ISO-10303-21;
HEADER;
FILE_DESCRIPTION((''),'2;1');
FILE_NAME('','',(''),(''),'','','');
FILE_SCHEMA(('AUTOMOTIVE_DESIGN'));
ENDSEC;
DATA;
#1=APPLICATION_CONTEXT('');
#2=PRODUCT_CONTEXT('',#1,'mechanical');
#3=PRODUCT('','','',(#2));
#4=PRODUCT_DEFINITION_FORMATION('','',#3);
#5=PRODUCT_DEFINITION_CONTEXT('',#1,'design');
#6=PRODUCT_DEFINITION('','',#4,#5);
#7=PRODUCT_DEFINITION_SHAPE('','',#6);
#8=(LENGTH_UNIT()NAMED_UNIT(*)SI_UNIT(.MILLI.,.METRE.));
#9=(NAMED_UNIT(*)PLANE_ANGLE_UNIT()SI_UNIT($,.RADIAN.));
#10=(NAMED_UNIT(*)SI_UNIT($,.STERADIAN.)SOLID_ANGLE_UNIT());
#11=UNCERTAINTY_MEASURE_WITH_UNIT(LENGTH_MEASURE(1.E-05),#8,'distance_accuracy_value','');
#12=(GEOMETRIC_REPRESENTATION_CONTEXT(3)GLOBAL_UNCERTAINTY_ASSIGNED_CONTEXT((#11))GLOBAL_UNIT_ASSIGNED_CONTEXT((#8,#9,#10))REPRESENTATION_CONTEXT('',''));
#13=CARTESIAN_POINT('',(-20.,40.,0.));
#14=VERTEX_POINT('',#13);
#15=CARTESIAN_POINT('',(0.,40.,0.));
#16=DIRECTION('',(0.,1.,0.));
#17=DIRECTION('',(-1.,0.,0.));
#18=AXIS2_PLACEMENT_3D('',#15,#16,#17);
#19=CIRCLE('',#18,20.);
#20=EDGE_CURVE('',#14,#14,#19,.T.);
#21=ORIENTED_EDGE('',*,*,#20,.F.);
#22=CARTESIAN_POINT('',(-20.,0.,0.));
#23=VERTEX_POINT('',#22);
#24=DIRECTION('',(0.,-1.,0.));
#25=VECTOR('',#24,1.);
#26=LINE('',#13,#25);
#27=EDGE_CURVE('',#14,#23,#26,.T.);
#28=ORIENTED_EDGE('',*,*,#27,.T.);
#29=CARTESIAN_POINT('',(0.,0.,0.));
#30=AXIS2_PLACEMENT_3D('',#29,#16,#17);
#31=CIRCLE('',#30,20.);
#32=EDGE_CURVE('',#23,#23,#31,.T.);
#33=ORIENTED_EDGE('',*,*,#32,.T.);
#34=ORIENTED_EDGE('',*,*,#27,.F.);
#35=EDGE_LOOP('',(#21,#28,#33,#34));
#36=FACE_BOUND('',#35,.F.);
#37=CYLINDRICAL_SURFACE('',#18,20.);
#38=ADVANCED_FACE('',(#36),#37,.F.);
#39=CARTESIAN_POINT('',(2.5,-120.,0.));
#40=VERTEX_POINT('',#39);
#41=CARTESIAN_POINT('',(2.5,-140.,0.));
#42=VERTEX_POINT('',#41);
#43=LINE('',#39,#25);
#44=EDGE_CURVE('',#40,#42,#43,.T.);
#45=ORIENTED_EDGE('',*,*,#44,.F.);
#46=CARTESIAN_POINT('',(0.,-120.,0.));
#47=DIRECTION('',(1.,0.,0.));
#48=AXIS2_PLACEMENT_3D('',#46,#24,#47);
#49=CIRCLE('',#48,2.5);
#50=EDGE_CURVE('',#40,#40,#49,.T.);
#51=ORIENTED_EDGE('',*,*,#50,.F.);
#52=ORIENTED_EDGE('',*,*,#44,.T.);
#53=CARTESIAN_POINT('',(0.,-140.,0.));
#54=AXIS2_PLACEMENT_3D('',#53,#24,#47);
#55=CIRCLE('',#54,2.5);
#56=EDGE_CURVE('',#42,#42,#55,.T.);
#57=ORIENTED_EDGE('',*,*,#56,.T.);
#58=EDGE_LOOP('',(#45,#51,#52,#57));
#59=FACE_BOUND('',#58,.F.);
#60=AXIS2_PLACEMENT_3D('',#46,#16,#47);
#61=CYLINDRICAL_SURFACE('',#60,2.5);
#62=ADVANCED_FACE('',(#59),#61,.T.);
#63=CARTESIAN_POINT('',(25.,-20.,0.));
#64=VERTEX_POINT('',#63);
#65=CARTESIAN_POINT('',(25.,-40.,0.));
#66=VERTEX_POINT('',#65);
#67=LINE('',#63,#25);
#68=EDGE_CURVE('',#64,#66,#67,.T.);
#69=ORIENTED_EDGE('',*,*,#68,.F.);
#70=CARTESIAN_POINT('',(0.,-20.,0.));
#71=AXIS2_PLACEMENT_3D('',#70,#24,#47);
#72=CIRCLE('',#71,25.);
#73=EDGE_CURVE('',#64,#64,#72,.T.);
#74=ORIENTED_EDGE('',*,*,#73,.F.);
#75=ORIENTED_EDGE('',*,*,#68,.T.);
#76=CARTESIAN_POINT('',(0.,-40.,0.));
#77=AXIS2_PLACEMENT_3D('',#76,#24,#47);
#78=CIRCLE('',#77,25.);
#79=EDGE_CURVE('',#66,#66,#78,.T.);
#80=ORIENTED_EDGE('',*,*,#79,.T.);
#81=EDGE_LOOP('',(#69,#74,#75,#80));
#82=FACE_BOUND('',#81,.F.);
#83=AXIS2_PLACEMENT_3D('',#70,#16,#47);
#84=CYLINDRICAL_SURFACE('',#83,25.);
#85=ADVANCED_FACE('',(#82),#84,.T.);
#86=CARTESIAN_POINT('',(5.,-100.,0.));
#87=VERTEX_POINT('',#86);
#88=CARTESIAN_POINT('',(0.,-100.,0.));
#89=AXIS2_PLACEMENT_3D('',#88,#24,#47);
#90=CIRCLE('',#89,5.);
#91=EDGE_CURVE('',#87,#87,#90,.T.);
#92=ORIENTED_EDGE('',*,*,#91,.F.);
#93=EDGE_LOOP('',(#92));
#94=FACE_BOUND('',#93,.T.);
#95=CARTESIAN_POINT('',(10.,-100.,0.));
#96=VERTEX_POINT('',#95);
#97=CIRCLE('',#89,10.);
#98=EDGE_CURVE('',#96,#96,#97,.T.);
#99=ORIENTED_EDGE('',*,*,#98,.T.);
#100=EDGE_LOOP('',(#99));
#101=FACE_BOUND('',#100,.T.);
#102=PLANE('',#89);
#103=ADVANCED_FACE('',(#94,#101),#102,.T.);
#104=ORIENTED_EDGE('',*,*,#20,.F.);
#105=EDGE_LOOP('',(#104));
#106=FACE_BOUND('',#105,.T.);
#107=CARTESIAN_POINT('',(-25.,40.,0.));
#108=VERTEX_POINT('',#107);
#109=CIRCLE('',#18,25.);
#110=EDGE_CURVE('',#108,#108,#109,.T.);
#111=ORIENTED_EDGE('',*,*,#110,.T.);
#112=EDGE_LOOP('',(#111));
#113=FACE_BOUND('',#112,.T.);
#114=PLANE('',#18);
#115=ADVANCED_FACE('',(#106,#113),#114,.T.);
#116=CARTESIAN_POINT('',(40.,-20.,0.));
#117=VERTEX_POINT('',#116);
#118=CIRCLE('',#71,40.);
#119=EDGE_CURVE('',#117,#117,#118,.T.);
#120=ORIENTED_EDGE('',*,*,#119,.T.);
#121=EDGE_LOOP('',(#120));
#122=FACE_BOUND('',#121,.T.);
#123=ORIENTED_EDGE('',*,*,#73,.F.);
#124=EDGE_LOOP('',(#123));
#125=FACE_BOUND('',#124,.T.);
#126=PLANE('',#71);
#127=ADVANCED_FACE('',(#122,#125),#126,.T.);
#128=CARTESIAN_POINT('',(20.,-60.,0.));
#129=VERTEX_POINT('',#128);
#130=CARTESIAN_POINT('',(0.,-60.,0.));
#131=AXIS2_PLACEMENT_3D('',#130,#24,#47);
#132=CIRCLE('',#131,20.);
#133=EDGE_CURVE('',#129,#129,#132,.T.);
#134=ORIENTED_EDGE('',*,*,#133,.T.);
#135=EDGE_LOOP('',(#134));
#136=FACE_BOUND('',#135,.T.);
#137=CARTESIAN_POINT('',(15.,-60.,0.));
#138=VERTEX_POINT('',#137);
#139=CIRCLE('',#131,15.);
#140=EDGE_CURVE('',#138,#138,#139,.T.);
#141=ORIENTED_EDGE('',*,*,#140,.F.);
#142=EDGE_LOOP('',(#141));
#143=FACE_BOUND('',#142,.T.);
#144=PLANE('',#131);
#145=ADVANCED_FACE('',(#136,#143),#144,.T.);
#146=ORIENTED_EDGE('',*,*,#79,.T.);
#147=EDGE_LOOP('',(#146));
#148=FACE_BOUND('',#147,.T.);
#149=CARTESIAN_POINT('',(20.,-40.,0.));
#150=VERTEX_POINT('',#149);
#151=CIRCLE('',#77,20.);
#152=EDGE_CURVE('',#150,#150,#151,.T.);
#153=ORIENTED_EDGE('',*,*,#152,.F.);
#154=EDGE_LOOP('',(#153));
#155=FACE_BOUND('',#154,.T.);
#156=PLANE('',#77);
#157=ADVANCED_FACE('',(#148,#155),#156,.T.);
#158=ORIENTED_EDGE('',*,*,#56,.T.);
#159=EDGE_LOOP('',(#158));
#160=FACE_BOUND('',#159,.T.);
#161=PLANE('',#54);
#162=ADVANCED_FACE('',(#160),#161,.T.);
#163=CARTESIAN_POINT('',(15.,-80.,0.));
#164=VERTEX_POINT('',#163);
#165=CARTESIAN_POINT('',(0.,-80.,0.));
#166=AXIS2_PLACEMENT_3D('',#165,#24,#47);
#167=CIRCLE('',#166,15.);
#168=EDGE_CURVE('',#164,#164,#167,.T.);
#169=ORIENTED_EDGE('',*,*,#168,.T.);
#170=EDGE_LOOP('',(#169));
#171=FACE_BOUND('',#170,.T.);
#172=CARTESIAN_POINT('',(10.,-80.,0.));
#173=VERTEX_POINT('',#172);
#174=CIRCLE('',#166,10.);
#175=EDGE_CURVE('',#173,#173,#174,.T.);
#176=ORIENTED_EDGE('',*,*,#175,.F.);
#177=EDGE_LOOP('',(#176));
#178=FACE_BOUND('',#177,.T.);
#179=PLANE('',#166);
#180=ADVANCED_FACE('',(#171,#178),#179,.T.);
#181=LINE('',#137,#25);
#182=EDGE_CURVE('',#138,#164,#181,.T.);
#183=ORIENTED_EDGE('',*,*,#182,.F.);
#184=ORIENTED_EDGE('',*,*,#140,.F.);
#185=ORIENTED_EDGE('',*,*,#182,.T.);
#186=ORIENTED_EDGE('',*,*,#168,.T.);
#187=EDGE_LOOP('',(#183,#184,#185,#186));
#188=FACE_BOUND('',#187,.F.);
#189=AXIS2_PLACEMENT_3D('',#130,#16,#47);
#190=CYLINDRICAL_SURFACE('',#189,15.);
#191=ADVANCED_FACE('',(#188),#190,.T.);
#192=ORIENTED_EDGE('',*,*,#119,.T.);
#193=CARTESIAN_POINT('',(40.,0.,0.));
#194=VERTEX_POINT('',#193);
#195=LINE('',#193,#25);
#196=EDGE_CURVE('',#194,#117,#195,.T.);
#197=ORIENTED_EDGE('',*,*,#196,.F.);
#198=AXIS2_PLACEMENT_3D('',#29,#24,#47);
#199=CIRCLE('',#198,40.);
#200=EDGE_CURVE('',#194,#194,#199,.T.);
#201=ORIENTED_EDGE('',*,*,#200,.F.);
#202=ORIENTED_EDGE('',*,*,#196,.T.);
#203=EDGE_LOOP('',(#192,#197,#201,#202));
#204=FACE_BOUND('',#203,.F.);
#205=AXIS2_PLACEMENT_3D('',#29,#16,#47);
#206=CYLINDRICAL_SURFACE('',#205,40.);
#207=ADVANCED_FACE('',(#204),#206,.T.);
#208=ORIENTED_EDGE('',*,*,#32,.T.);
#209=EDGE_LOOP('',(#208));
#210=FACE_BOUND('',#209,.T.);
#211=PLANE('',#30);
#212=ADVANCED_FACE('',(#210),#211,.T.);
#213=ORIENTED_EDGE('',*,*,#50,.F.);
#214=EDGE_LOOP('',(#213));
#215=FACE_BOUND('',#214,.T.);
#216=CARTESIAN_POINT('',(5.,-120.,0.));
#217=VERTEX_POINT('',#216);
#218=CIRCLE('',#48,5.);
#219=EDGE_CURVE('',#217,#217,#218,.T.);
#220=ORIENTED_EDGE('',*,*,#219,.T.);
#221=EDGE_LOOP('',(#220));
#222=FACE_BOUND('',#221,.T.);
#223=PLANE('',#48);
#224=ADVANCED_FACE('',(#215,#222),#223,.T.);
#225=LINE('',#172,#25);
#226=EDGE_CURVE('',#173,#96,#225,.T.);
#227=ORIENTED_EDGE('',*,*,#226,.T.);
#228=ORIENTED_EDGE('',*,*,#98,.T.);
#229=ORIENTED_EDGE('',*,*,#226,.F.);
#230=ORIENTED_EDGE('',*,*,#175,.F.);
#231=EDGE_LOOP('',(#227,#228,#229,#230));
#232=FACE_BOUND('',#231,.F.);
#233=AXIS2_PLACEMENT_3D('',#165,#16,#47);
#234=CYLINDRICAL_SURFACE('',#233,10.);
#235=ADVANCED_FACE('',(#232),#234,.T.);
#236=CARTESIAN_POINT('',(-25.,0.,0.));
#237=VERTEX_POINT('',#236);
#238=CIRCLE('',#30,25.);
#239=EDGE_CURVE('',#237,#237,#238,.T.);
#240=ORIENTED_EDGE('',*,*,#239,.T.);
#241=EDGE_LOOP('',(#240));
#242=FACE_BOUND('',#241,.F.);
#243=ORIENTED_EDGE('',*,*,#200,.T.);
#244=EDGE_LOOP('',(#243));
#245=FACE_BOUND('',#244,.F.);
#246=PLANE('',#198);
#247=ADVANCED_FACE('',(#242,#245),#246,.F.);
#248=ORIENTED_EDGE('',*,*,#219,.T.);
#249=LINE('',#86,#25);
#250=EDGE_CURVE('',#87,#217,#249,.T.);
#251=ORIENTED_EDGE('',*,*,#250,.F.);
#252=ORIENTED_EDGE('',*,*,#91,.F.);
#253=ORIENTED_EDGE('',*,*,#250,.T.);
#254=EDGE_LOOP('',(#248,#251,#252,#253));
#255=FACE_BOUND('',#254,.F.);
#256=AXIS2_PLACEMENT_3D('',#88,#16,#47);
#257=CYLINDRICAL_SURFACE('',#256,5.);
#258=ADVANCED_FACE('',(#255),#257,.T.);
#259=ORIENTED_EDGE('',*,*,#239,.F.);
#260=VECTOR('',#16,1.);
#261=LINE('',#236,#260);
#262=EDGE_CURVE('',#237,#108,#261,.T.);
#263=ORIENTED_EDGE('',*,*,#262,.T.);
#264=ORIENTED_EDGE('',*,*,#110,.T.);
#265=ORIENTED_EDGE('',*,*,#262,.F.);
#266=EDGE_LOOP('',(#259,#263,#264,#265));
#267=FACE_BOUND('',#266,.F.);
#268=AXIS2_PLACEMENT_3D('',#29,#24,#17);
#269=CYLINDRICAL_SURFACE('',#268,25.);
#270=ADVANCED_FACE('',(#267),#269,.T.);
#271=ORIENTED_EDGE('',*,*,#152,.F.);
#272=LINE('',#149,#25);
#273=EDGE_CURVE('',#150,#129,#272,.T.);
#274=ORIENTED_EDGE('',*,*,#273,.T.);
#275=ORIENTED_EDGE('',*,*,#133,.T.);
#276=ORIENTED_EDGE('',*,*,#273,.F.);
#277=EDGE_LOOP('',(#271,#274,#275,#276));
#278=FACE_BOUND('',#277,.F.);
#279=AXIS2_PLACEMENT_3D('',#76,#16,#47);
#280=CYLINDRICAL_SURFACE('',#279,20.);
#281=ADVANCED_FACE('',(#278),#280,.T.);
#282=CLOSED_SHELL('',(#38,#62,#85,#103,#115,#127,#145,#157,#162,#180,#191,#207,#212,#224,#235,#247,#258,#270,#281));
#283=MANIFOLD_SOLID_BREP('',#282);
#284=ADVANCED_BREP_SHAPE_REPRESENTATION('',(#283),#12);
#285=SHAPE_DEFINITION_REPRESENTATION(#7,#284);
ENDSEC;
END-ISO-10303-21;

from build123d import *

# Parameters (mm, degrees)
F0_R      = 40
F1_DEPTH  = 20
F2_R      = 25
F3_DEPTH  = 20
F4_R      = 20
F5_DEPTH  = 20
F6_R      = 15
F7_DEPTH  = 20
F8_R      = 10
F9_DEPTH  = 20
F10_R     = 5
F11_DEPTH = 20
F12_R     = 2.5
F13_DEPTH = 20
F14_R     = 25
F15_DEPTH = 40
F16_R     = 20
F17_DEPTH = 40


# Not quite as in the source:
# - a feature names something its author has since deleted; it is built from what else it names


with BuildPart() as f1:
    # F0 (on Front) → F1 (new body)
    with BuildSketch(Plane.XZ):
        Circle(F0_R)
    extrude(amount=F1_DEPTH)

    # F2 (on face) → F3 (join)
    with BuildSketch(Plane.XZ.offset(20)):
        Circle(F2_R)
    extrude(amount=F3_DEPTH)

    # F4 (on face) → F5 (join)
    with BuildSketch(Plane.XZ.offset(40)):
        Circle(F4_R)
    extrude(amount=F5_DEPTH)

    # F6 (on face) → F7 (join)
    with BuildSketch(Plane.XZ.offset(60)):
        Circle(F6_R)
    extrude(amount=F7_DEPTH)

    # F8 (on face) → F9 (join)
    with BuildSketch(Plane.XZ.offset(80)):
        Circle(F8_R)
    extrude(amount=F9_DEPTH)

    # F10 (on face) → F11 (join)
    with BuildSketch(Plane.XZ.offset(100)):
        Circle(F10_R)
    extrude(amount=F11_DEPTH)

    # F12 (on face) → F13 (join)
    with BuildSketch(Plane.XZ.offset(120)):
        Circle(F12_R)
    extrude(amount=F13_DEPTH)

    # F14 (on face) → F15 (join)
    with BuildSketch(Plane(origin=(0, 0, 0), x_dir=(-1, 0, 0), z_dir=(0, 1, 0))):
        Circle(F14_R)
    extrude(amount=F15_DEPTH)

    # F16 (on face) → F17 (cut)
    with BuildSketch(Plane(origin=(0, 40, 0), x_dir=(-1, 0, 0), z_dir=(0, 1, 0))):
        Circle(F16_R)
    extrude(amount=-F17_DEPTH, mode=Mode.SUBTRACT)


solid = f1.part
